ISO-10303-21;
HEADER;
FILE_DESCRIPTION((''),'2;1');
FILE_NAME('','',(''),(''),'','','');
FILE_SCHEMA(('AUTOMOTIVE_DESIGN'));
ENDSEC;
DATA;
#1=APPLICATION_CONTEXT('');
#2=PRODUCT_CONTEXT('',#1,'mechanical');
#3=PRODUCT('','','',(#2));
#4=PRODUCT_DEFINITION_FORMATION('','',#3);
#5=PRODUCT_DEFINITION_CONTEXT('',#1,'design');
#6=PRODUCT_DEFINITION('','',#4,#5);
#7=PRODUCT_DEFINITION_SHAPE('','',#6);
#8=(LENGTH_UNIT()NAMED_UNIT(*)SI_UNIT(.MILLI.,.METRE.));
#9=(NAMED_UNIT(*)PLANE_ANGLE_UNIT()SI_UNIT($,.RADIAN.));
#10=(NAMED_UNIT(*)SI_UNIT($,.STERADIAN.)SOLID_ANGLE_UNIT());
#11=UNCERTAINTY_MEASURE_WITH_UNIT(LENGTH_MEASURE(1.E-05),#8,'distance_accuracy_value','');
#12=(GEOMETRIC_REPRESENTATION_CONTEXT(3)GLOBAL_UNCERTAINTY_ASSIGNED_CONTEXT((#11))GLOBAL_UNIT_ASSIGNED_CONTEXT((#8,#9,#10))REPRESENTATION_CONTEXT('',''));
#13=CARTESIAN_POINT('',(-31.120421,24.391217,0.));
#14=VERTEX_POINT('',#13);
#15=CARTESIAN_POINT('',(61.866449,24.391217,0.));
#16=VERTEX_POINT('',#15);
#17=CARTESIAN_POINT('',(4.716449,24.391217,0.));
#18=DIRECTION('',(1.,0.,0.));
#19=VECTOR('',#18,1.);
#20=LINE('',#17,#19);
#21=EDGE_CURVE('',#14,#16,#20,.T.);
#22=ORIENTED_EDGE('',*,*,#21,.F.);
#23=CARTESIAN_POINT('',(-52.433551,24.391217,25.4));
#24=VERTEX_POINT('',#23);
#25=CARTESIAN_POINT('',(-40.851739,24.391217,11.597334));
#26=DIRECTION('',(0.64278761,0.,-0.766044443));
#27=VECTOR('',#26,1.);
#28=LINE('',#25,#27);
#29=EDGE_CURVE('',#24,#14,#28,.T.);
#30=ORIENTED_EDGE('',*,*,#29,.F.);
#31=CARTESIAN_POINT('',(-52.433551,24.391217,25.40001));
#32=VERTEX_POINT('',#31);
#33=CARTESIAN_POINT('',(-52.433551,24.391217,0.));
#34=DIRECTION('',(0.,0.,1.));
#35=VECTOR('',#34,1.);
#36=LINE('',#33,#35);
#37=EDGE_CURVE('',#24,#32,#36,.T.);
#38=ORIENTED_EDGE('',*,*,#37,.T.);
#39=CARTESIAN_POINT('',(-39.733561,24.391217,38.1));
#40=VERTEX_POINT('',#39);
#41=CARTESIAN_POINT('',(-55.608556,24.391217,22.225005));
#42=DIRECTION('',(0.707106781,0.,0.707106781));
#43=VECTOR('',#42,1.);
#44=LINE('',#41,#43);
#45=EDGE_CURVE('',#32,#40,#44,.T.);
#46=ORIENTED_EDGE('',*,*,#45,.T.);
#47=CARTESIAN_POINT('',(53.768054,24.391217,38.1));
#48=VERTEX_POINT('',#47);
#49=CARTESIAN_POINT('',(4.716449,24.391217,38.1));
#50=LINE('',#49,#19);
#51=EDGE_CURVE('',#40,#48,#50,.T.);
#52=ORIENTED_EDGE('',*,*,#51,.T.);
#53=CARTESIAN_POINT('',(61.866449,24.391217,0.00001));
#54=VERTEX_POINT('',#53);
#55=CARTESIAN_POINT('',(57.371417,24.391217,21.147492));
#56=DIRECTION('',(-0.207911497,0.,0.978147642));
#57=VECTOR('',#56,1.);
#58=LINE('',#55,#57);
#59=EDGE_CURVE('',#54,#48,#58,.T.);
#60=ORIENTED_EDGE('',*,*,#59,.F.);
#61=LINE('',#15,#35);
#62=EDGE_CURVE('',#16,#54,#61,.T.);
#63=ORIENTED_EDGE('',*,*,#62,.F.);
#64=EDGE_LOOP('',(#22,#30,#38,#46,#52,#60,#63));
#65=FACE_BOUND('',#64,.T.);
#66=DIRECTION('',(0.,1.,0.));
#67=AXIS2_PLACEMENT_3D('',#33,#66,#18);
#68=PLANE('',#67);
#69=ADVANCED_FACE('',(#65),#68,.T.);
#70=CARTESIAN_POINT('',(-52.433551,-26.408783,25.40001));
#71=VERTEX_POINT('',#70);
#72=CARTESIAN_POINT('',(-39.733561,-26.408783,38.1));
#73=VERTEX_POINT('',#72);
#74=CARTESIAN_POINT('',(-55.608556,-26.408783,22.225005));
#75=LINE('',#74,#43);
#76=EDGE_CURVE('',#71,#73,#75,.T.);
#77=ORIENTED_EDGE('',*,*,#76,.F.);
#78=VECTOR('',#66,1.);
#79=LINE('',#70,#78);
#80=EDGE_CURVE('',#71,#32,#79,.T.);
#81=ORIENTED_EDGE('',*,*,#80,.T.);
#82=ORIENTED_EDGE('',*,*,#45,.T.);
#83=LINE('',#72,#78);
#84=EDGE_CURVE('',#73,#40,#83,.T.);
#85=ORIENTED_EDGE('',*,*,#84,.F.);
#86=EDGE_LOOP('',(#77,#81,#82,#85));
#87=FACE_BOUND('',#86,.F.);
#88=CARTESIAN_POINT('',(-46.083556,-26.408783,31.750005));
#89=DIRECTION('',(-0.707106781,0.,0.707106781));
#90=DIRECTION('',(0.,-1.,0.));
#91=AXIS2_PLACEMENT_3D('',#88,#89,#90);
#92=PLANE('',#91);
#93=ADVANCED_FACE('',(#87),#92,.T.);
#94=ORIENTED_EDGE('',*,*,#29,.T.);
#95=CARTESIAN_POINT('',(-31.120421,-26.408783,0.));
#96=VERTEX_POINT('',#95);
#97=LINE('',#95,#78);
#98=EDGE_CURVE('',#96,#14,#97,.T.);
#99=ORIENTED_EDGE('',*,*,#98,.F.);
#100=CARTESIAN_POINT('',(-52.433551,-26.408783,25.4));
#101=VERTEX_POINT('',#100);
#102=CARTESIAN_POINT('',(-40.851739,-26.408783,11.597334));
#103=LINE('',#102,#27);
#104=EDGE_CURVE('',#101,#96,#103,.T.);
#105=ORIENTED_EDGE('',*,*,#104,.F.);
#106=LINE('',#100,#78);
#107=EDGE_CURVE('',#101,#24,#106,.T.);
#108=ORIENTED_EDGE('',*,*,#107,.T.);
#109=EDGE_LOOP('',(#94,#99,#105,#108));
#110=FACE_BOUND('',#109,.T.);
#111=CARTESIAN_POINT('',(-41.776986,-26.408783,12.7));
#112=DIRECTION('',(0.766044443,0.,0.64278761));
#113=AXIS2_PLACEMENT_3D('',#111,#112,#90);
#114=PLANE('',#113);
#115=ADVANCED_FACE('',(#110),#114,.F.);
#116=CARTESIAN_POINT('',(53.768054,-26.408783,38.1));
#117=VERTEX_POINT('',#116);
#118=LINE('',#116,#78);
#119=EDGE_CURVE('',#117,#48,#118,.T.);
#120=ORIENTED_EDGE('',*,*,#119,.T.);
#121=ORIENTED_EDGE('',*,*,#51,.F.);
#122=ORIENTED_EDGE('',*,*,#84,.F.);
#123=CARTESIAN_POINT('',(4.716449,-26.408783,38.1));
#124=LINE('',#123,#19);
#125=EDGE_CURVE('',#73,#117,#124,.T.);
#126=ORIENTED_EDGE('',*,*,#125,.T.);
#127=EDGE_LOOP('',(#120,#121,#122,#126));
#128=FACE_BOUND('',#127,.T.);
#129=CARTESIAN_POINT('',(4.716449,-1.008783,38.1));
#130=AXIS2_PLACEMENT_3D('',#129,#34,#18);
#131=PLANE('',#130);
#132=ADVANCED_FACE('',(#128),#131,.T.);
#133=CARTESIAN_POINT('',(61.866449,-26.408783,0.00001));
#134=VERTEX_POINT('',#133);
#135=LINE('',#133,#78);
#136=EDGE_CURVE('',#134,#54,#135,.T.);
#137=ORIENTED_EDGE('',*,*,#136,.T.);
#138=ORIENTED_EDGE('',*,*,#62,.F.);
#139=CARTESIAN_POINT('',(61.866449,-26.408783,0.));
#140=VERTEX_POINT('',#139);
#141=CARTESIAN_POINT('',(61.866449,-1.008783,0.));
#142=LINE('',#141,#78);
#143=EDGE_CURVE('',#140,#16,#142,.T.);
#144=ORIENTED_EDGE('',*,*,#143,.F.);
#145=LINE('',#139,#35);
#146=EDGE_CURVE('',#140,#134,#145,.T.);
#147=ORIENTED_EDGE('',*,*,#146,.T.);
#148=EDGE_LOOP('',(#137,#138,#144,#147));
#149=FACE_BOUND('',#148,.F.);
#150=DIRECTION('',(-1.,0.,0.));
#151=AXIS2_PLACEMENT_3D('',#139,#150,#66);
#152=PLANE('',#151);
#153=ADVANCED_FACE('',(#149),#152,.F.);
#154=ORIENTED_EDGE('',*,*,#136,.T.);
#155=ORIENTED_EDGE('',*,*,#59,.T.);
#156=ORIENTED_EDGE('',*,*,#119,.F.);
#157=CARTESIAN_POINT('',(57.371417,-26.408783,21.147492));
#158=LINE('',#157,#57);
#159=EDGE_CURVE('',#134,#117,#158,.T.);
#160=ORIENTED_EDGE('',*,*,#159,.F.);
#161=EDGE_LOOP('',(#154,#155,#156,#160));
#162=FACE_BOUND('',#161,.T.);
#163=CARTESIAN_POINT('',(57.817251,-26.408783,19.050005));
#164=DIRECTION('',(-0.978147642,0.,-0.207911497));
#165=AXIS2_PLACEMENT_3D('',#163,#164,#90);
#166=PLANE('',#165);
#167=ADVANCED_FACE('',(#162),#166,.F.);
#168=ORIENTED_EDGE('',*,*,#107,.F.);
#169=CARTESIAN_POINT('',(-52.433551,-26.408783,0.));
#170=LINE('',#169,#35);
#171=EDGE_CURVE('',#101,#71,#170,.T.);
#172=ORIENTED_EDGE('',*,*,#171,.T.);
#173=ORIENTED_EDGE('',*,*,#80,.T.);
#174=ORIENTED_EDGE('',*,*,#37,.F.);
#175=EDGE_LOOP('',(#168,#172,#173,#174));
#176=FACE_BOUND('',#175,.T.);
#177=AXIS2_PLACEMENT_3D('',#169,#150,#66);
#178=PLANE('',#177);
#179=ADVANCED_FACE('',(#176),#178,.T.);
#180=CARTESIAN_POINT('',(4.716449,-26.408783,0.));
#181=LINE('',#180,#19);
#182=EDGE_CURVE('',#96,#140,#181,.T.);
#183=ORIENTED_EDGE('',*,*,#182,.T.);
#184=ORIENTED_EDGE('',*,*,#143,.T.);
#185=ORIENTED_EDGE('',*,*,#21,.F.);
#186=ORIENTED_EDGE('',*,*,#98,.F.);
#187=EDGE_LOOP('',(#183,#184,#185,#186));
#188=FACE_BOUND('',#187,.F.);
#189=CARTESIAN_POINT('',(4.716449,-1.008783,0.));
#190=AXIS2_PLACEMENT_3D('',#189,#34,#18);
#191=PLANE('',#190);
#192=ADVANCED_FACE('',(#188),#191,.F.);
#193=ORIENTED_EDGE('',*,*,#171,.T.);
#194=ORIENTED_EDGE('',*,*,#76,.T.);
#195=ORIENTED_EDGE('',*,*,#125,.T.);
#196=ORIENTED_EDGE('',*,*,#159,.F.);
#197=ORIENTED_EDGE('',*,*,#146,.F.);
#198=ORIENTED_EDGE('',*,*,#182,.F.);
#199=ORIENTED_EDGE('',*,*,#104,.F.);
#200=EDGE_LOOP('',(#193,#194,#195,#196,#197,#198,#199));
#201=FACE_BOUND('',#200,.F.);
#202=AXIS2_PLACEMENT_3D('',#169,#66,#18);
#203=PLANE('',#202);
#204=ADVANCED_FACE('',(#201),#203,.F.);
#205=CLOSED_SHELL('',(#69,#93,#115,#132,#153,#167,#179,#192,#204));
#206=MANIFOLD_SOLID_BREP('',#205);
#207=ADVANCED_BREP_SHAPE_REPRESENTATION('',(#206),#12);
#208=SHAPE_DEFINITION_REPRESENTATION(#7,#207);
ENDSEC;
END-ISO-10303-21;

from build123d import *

# Parameters (mm, degrees)
F0_W     = 114.3
F0_H     = 50.8
F1_DEPTH = 38.1
F2_SIZE2 = 21.3131306319
F2_SIZE  = 25.4
F3_SIZE  = 12.69999
F4_SIZE2 = 8.098395
F4_SIZE  = 38.09999


# Not quite as in the source:
# - a fillet or chamfer is up to 0.001 mm smaller than in the source, because OpenCascade refuses the exact size


with BuildPart() as f1:
    # F0 (on Top) → F1 (new body)
    with BuildSketch(Plane.XY):
        with Locations((4.716448799, -1.0087825358)):
            Rectangle(F0_W, F0_H)
    extrude(amount=F1_DEPTH)

    # F2
    f2_edges = [f1.edges().sort_by_distance(p)[0] for p in [
        (-52.433551, -1.008783, 0),
    ]]
    f2_side = f1.faces().sort_by_distance((-52.433551, -1.008783, 19.05))[0]
    chamfer(f2_edges, length=F2_SIZE, length2=F2_SIZE2, reference=f2_side)

    # F3 (size 12.7 in the source; OpenCascade refuses exactly that, so slightly less here)
    f3_edges = [f1.edges().sort_by_distance(p)[0] for p in [
        (-52.433551, -1.008783, 38.1),
    ]]
    chamfer(f3_edges, length=F3_SIZE)

    # F4 (size 38.1 and 8.0984049996 in the source; OpenCascade refuses exactly that, so slightly less here)
    f4_edges = [f1.edges().sort_by_distance(p)[0] for p in [
        (61.866449, -1.008783, 38.1),
    ]]
    f4_side = f1.faces().sort_by_distance((61.866449, -1.008783, 19.05))[0]
    chamfer(f4_edges, length=F4_SIZE, length2=F4_SIZE2, reference=f4_side)


solid = f1.part
